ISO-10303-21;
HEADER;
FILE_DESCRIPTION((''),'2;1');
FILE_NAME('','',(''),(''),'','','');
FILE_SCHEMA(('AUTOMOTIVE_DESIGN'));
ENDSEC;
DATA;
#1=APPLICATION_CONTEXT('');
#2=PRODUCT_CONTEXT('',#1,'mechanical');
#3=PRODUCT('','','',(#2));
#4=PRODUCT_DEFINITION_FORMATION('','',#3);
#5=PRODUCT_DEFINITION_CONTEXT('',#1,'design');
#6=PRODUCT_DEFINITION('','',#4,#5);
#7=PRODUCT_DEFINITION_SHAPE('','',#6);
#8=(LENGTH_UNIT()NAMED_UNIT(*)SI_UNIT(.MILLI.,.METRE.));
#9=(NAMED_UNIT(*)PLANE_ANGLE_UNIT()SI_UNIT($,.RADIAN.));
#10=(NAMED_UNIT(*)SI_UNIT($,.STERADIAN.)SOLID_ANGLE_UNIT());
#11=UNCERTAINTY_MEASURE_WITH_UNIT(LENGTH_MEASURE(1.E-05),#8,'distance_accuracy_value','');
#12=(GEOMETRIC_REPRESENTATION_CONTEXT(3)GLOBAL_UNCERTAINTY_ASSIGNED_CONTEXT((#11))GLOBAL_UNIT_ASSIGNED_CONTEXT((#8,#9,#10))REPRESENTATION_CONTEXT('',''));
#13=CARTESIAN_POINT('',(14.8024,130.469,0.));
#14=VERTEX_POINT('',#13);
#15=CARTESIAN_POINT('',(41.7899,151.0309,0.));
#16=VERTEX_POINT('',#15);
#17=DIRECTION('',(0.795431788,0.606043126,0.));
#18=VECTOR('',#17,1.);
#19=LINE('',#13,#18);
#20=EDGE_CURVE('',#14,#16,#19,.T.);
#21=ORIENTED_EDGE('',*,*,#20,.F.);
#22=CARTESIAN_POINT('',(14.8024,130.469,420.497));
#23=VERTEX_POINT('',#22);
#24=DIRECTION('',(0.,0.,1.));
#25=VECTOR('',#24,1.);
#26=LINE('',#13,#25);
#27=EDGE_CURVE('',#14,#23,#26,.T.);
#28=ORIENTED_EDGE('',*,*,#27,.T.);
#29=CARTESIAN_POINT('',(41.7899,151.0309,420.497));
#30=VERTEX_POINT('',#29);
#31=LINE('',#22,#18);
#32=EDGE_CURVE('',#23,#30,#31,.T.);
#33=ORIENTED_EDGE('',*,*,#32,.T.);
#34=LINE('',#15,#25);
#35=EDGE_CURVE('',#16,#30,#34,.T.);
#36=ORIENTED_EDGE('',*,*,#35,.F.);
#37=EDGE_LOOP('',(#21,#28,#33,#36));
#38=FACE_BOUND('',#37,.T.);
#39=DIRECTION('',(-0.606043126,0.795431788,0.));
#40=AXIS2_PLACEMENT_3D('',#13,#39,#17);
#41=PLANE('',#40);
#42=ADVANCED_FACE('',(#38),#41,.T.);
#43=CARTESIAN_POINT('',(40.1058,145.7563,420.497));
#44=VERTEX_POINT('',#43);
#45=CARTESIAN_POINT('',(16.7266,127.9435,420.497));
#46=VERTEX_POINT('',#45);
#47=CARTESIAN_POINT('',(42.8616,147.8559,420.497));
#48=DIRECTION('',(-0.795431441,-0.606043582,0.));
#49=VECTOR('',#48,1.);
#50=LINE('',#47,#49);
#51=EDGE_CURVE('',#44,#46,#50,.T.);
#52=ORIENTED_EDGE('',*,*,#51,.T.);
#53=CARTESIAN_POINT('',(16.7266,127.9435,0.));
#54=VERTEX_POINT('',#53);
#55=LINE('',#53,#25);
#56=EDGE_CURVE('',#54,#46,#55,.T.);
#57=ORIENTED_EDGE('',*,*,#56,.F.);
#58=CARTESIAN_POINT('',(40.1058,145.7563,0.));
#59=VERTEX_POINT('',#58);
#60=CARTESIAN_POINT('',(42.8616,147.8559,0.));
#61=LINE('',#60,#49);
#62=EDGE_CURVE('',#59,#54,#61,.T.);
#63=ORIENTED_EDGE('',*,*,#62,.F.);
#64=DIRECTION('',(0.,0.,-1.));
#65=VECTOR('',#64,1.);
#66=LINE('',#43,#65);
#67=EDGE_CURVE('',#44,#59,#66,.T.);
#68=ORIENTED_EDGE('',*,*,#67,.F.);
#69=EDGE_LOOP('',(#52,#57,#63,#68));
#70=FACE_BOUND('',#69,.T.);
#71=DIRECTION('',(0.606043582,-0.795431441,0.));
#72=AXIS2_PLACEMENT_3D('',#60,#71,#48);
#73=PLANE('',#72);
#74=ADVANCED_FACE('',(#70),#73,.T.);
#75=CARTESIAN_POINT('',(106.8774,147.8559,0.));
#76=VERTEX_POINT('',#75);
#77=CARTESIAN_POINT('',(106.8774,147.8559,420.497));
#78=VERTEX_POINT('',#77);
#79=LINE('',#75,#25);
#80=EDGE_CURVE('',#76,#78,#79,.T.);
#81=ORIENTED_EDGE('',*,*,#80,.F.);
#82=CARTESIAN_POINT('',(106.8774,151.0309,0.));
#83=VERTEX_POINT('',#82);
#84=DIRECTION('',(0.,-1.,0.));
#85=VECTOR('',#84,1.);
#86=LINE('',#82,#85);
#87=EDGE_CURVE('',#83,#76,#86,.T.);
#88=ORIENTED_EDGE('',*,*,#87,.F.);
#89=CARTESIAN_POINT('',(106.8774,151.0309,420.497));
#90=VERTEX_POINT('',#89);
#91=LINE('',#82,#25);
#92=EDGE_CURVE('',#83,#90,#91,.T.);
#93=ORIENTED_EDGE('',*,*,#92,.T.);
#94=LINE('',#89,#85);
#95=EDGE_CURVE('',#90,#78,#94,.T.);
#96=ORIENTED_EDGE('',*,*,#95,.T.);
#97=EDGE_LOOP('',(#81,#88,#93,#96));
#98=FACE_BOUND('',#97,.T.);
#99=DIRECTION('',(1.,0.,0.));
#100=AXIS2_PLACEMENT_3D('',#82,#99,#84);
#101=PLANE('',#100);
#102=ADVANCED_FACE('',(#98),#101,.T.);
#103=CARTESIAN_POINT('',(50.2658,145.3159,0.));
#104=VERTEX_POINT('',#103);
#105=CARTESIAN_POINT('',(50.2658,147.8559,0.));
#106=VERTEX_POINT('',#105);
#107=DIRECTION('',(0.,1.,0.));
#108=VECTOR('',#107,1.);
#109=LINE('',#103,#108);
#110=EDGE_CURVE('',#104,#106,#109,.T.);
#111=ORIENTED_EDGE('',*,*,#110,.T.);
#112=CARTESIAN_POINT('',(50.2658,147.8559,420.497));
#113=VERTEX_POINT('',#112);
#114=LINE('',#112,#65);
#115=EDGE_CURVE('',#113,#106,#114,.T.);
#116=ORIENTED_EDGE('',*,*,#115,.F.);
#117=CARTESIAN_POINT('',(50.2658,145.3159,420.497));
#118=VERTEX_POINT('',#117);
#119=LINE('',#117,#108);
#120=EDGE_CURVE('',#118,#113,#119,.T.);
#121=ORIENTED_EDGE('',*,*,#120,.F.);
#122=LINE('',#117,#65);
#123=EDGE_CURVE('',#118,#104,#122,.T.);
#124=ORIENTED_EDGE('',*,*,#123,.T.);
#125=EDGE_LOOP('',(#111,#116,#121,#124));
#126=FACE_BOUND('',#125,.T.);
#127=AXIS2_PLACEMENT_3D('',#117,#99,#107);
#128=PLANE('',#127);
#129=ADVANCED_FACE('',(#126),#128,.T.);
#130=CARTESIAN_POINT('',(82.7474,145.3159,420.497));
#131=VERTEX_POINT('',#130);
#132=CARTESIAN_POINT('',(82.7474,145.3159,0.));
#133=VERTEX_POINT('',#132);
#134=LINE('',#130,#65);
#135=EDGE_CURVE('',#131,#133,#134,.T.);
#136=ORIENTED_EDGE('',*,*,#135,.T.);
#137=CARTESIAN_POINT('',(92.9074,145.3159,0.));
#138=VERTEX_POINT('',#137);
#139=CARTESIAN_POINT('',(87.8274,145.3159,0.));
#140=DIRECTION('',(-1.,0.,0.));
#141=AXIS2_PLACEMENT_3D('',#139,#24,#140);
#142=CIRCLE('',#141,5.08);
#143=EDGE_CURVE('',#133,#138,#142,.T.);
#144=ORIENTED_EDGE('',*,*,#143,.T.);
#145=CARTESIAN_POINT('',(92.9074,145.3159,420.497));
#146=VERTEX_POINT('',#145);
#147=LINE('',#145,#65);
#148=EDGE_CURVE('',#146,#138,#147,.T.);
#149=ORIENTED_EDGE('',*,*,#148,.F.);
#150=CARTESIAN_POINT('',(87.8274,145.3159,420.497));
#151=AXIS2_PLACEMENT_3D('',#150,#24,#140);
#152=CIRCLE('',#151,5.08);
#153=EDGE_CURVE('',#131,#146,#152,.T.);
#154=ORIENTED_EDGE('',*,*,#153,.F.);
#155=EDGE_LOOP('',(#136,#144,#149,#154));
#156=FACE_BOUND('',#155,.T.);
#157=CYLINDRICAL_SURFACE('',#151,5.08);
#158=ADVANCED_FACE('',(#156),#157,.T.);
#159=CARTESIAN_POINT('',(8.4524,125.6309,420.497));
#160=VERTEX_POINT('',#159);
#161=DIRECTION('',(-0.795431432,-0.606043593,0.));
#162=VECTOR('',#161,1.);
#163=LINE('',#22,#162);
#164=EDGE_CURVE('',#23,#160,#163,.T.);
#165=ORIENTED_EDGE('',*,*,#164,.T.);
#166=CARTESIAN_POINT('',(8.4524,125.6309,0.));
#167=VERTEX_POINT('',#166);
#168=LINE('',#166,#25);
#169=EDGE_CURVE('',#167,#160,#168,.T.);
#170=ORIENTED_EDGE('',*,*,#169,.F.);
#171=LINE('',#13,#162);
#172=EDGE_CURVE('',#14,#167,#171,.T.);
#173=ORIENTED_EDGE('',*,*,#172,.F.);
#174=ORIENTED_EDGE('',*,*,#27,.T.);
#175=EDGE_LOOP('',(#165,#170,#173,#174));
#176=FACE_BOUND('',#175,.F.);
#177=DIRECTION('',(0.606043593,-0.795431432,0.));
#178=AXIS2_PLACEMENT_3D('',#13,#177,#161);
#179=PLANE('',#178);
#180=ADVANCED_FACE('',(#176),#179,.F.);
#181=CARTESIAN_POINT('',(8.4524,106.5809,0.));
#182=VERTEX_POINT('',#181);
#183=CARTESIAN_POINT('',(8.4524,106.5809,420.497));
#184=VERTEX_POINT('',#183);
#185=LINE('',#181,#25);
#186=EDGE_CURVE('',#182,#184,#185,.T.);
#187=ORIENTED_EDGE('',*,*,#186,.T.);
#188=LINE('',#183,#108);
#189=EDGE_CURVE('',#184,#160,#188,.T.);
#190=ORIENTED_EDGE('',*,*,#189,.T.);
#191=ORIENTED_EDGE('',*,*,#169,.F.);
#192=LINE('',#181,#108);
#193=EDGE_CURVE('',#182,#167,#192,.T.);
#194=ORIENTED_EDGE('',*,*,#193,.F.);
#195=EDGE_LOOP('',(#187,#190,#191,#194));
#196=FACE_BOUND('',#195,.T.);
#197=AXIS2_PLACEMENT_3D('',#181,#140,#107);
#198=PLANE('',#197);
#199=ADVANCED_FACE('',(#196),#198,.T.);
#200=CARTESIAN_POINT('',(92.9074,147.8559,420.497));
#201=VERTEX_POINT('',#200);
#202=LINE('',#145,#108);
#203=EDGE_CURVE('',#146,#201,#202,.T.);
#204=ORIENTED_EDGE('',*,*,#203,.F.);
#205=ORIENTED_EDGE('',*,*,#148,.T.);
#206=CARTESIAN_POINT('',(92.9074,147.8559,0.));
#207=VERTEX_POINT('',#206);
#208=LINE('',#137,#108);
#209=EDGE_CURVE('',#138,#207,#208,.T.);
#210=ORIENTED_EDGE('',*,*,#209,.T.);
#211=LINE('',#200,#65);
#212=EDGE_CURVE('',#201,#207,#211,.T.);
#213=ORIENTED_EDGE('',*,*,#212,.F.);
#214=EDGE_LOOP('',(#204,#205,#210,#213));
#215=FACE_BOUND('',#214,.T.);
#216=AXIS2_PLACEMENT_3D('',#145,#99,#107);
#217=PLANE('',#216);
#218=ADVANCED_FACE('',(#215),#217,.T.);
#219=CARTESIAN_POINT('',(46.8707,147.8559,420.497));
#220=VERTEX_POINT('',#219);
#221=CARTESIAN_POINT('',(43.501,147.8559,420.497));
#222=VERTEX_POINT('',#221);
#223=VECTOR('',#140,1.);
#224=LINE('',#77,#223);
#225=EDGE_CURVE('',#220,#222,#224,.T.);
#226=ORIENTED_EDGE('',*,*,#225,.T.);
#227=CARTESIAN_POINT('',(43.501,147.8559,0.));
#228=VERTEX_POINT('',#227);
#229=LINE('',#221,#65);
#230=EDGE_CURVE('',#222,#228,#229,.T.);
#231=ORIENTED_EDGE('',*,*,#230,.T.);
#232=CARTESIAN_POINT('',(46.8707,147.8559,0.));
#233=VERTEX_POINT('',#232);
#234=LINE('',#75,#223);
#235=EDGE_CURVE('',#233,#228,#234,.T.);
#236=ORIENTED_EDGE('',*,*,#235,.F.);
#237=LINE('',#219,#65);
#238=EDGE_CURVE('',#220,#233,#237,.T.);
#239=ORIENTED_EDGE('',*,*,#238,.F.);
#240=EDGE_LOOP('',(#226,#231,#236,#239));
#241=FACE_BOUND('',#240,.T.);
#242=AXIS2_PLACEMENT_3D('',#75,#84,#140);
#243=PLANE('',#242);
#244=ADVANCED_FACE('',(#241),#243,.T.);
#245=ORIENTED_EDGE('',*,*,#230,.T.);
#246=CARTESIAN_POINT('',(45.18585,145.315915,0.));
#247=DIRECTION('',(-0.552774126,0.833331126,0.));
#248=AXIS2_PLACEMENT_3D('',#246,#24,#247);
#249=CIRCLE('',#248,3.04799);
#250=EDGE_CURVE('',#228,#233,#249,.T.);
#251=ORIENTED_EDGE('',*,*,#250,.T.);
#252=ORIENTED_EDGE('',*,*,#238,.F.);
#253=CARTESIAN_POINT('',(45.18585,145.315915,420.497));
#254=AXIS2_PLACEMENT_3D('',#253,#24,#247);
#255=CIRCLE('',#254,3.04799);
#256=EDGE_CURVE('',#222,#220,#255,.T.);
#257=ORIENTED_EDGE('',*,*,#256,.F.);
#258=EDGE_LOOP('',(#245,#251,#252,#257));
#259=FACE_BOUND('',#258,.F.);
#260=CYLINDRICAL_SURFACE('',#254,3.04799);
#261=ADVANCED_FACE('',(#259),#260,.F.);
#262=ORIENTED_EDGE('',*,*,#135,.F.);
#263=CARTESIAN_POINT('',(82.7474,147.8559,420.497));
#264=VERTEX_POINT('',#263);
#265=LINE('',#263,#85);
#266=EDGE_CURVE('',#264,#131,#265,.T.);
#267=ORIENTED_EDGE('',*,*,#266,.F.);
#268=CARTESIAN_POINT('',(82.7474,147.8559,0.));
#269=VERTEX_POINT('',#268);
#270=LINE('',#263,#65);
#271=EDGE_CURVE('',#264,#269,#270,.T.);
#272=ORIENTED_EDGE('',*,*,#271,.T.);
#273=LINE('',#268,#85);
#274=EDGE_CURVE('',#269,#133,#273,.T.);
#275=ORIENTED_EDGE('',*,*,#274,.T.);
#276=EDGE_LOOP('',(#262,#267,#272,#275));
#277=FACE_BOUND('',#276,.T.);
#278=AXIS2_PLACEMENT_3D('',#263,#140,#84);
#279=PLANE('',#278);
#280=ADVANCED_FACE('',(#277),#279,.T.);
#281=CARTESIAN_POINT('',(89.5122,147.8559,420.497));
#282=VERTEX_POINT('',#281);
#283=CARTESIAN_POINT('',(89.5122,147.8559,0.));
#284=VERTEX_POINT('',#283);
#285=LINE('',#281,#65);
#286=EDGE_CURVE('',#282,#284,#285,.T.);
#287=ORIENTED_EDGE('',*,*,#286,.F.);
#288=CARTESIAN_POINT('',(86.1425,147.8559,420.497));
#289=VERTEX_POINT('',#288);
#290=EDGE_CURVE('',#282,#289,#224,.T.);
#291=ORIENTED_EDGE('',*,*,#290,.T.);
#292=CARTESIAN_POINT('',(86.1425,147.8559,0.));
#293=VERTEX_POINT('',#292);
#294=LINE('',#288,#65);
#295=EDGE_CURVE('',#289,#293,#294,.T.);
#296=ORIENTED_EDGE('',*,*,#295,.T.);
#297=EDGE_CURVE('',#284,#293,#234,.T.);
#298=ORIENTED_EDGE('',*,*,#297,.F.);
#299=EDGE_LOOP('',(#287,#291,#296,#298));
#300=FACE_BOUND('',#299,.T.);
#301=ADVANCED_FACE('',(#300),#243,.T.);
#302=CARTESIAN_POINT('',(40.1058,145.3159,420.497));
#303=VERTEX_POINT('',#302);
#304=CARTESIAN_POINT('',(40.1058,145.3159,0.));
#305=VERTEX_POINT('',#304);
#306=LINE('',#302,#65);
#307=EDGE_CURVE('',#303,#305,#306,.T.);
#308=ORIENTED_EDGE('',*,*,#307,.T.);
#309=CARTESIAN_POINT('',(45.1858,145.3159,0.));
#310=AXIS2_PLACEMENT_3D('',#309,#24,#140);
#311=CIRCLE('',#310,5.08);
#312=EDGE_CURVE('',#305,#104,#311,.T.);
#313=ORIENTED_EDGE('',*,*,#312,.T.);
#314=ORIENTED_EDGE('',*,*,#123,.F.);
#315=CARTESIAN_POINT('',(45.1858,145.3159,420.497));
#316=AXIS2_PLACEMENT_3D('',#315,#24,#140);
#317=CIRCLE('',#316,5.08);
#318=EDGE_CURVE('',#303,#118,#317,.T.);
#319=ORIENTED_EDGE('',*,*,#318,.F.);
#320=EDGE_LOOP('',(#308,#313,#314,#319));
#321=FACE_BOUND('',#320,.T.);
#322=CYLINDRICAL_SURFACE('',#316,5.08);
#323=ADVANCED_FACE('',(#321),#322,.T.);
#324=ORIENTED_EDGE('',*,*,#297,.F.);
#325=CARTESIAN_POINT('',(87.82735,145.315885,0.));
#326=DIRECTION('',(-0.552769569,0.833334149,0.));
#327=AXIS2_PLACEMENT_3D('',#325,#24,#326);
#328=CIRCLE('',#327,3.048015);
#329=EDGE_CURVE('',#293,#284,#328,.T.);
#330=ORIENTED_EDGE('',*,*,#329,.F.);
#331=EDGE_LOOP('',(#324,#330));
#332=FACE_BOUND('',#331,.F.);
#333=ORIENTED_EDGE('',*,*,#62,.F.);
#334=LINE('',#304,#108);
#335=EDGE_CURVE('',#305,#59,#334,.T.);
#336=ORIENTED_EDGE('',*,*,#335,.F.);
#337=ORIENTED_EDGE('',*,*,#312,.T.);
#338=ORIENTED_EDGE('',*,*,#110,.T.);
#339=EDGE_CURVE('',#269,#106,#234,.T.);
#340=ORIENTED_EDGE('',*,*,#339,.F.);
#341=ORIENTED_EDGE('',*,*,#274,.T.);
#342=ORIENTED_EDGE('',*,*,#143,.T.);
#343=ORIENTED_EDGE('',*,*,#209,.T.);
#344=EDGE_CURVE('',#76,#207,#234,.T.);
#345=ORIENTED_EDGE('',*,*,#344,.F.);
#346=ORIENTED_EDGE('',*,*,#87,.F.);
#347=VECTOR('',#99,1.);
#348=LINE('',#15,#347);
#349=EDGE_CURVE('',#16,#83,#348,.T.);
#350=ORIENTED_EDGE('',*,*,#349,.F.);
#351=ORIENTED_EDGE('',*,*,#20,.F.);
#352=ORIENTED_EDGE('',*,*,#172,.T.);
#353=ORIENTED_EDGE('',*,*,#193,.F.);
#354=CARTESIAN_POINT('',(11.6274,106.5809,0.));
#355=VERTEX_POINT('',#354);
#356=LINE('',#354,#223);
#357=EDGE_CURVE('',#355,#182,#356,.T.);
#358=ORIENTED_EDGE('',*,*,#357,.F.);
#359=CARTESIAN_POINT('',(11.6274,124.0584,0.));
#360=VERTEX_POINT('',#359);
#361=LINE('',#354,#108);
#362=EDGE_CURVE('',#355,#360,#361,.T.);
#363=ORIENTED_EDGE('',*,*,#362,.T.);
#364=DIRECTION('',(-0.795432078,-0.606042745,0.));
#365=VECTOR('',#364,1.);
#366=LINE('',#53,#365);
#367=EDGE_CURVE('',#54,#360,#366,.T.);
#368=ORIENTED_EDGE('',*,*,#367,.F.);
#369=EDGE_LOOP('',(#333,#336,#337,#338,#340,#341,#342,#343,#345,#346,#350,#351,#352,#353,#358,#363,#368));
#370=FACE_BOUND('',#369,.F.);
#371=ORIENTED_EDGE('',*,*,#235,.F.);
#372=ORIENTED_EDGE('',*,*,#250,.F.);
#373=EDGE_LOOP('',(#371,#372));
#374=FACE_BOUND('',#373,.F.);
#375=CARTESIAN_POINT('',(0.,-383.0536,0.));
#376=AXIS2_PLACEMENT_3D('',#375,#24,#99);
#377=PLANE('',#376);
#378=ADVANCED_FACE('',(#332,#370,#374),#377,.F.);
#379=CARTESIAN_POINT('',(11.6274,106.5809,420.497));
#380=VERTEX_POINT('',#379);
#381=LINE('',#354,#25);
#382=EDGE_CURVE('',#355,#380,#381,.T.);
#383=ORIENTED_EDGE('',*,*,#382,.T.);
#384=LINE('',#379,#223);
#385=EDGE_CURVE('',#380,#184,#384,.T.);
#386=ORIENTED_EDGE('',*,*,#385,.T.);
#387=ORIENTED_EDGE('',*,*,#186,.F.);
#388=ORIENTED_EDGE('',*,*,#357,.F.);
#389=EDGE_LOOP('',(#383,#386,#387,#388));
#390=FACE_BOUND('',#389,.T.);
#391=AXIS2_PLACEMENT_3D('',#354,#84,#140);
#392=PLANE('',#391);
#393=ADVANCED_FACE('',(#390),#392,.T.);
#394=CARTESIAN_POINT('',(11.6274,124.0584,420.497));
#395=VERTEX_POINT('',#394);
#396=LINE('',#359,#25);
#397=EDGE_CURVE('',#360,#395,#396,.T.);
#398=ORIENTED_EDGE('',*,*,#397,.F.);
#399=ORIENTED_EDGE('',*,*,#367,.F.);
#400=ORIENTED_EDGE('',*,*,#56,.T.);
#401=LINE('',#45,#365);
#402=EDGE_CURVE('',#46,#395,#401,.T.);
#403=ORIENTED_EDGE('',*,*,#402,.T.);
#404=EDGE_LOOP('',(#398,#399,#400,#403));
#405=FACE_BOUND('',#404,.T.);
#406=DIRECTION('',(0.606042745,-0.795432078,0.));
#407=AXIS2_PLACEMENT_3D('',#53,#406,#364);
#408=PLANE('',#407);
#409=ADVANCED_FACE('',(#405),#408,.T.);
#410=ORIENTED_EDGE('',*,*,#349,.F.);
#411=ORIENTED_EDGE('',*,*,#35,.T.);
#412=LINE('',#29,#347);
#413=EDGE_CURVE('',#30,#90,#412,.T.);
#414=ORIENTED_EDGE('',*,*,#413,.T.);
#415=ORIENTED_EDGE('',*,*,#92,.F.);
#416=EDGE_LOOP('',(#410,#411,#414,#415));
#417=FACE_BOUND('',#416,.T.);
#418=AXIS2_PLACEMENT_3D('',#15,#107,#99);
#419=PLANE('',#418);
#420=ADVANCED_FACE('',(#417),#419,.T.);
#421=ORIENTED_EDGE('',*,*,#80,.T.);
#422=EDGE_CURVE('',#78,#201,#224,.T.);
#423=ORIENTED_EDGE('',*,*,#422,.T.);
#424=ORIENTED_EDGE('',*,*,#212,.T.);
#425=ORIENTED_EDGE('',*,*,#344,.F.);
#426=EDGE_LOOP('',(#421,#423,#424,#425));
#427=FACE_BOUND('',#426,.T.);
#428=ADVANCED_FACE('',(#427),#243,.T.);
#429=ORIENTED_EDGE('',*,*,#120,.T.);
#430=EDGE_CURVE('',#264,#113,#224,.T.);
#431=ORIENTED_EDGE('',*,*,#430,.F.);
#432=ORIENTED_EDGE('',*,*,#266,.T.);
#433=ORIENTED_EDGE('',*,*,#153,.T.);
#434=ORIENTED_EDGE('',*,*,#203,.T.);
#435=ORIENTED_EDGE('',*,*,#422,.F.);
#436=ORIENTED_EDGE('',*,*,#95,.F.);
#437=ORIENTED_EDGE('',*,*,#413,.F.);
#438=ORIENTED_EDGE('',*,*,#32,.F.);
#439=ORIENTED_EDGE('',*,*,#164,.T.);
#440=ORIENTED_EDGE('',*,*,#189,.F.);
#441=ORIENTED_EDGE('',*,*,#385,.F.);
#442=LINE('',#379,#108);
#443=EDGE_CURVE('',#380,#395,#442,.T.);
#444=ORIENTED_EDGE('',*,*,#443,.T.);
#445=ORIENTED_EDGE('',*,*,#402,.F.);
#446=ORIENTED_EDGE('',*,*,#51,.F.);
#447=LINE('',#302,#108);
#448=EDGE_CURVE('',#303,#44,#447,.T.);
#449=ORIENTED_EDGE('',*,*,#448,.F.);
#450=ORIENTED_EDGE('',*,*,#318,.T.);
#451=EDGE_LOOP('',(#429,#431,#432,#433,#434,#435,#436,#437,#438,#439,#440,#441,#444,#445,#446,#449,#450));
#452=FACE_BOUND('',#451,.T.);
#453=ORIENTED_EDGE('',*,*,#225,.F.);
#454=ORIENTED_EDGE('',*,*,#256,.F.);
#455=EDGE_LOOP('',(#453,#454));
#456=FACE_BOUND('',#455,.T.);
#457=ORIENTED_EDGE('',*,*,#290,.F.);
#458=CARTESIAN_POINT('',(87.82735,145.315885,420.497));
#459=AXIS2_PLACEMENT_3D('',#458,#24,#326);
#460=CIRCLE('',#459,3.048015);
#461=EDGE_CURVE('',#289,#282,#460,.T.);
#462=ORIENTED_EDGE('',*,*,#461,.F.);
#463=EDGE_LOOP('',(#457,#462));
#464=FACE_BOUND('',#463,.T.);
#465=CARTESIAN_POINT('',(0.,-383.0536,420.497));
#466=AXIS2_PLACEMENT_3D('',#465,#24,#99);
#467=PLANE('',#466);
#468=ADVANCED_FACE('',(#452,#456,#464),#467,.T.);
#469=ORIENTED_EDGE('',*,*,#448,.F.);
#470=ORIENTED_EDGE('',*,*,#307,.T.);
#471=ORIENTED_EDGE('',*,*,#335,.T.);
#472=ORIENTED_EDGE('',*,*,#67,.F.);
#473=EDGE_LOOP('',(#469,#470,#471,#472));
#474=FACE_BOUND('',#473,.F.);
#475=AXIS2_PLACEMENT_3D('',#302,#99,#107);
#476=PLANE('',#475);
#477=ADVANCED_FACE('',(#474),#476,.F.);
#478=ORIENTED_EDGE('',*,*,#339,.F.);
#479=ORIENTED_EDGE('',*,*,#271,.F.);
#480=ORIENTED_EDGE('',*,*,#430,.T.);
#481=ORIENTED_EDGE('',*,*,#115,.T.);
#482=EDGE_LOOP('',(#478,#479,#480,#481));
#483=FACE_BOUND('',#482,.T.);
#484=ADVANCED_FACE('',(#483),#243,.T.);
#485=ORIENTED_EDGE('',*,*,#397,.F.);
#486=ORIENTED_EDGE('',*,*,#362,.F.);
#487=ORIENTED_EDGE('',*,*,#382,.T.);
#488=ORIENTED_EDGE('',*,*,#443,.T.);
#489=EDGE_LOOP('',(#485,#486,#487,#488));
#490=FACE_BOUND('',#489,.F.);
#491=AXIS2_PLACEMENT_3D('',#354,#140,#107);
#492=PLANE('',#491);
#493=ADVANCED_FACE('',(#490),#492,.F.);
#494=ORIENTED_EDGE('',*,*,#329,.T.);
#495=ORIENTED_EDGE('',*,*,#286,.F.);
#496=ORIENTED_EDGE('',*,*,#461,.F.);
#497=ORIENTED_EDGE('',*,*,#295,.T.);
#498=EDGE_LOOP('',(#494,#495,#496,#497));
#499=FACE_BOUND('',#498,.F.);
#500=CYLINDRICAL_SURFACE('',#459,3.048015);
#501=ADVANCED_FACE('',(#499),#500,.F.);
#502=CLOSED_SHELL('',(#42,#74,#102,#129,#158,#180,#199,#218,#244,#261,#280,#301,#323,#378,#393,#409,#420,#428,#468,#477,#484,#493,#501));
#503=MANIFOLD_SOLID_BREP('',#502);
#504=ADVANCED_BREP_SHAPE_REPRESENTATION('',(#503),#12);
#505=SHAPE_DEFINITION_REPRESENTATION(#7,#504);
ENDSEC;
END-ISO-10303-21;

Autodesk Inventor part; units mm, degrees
ref_plane "YZ Plane" through (0, 0, 0) normal (1, 0, 0) x (0, 1, 0)
ref_plane "XZ Plane" through (0, 0, 0) normal (0, 1, 0) x (-1, 0, 0)
ref_plane "Work Plane1" through (0, -383.0536, 0) normal (0, 0, 1) x (1, 0, 0)
sketch "Sketch1" plane through (0, -383.0536, 0) normal (0, 0, 1) x (1, 0, 0)
  line L0 (41.7899, 534.0845) -> (106.8774, 534.0845) projected
  line L1 (14.8024, 513.5226) -> (41.7899, 534.0845) projected
  line L2 (106.8774, 530.9095) -> (42.8616, 530.9095)
  line L3 (42.8616, 530.9095) -> (16.7266, 510.9971)
  line L4 (106.8774, 534.0845) -> (106.8774, 530.9095)
  line L5 (11.6274, 489.6345) -> (11.6274, 207.8533) projected
  line L6 (16.7266, 510.9971) -> (11.6274, 507.112)
  line L7 (14.8024, 513.5226) -> (8.4524, 508.6845)
  line L8 (11.6274, 489.6345) -> (11.6274, 507.112)
  line L9 (11.6274, 489.6345) -> (11.6274, 207.8533) projected
  line L10 (8.4524, 489.6345) -> (8.4524, 207.8533) projected
  line L11 (11.6274, 489.6345) -> (8.4524, 489.6345) projected
  line L12 (8.4524, 489.6345) -> (8.4524, 508.6845)
  point P0 (0, 383.0536)
  dimension "d0" = 3.175
extrude "Extrusion1" add sketch "Sketch1" along normal blind 420.497
sketch "Sketch2" plane through (0, -383.0536, 420.497) normal (0, 0, 1) x (1, 0, 0)
  line L0 (42.8616, 530.9095) -> (106.8774, 530.9095) projected
  line L1 (92.9074, 530.9095) -> (82.7474, 530.9095)
  arc A0 (82.7474, 528.3695) -> (92.9074, 528.3695) centre (87.8274, 528.3695) ccw
  line L2 (106.8774, 534.0845) -> (41.7899, 534.0845) projected
  arc A1 (89.5122, 530.9095) -> (86.1425, 530.9095) centre (87.8274, 528.3695) ccw
  line L3 (92.9074, 528.3695) -> (92.9074, 530.9095)
  line L4 (82.7474, 530.9095) -> (82.7474, 528.3695)
  arc A2 (83.428, 530.9095) -> (82.7474, 528.3695) centre (87.8274, 528.3695) ccw construction
  arc A3 (92.2268, 530.9095) -> (83.428, 530.9095) centre (87.8274, 528.3695) ccw
  arc A4 (92.9074, 528.3695) -> (92.2268, 530.9095) centre (87.8274, 528.3695) ccw construction
  arc A5 (86.1425, 530.9095) -> (89.5122, 530.9095) centre (87.8274, 528.3695) ccw
  line L5 (41.1835, 533.6226) -> (43.2506, 530.9095)
  line L6 (14.8024, 513.5226) -> (41.7899, 534.0845) projected
  arc A6 (40.1058, 528.3695) -> (50.2658, 528.3695) centre (45.1858, 528.3695) ccw
  arc A7 (43.501, 530.9095) -> (46.8707, 530.9095) centre (45.1858, 528.3695) ccw
  line L7 (50.2658, 528.3695) -> (50.2658, 530.9095)
  line L8 (11.6274, 507.112) -> (42.8616, 530.9095) projected
  line L9 (40.1058, 528.3695) -> (40.1058, 528.8099)
  line L10 (43.2506, 530.9095) -> (43.3386, 530.794) construction
  arc A8 (40.1264, 528.8256) -> (40.1058, 528.3695) centre (45.1858, 528.3695) ccw construction
  arc A9 (49.5853, 530.9095) -> (40.1264, 528.8256) centre (45.1858, 528.3695) ccw
  arc A10 (50.2658, 528.3695) -> (49.5853, 530.9095) centre (45.1858, 528.3695) ccw construction
  arc A11 (46.8707, 530.9095) -> (43.501, 530.9095) centre (45.1858, 528.3695) ccw
  point P0 (0, 383.0536)
  dimension "d3" = 10.16
  dimension "d4" = 13.97
  dimension "d5" = 10.16
  dimension "d8" = 6.096
  dimension "d9" = 5.715
  dimension "d10" = 3.556
  dimension "d11" = 10.16
  dimension "d12" = 6.096
  dimension "d13" = 5.715
extrude "Extrusion2" add sketch "Sketch2" against normal up to surface (420.497 mm away) contours L0 A7 L7 A6 L9 L8 | L0 A5 L3 A0 L4
properties part number "DriveBaseFront"
